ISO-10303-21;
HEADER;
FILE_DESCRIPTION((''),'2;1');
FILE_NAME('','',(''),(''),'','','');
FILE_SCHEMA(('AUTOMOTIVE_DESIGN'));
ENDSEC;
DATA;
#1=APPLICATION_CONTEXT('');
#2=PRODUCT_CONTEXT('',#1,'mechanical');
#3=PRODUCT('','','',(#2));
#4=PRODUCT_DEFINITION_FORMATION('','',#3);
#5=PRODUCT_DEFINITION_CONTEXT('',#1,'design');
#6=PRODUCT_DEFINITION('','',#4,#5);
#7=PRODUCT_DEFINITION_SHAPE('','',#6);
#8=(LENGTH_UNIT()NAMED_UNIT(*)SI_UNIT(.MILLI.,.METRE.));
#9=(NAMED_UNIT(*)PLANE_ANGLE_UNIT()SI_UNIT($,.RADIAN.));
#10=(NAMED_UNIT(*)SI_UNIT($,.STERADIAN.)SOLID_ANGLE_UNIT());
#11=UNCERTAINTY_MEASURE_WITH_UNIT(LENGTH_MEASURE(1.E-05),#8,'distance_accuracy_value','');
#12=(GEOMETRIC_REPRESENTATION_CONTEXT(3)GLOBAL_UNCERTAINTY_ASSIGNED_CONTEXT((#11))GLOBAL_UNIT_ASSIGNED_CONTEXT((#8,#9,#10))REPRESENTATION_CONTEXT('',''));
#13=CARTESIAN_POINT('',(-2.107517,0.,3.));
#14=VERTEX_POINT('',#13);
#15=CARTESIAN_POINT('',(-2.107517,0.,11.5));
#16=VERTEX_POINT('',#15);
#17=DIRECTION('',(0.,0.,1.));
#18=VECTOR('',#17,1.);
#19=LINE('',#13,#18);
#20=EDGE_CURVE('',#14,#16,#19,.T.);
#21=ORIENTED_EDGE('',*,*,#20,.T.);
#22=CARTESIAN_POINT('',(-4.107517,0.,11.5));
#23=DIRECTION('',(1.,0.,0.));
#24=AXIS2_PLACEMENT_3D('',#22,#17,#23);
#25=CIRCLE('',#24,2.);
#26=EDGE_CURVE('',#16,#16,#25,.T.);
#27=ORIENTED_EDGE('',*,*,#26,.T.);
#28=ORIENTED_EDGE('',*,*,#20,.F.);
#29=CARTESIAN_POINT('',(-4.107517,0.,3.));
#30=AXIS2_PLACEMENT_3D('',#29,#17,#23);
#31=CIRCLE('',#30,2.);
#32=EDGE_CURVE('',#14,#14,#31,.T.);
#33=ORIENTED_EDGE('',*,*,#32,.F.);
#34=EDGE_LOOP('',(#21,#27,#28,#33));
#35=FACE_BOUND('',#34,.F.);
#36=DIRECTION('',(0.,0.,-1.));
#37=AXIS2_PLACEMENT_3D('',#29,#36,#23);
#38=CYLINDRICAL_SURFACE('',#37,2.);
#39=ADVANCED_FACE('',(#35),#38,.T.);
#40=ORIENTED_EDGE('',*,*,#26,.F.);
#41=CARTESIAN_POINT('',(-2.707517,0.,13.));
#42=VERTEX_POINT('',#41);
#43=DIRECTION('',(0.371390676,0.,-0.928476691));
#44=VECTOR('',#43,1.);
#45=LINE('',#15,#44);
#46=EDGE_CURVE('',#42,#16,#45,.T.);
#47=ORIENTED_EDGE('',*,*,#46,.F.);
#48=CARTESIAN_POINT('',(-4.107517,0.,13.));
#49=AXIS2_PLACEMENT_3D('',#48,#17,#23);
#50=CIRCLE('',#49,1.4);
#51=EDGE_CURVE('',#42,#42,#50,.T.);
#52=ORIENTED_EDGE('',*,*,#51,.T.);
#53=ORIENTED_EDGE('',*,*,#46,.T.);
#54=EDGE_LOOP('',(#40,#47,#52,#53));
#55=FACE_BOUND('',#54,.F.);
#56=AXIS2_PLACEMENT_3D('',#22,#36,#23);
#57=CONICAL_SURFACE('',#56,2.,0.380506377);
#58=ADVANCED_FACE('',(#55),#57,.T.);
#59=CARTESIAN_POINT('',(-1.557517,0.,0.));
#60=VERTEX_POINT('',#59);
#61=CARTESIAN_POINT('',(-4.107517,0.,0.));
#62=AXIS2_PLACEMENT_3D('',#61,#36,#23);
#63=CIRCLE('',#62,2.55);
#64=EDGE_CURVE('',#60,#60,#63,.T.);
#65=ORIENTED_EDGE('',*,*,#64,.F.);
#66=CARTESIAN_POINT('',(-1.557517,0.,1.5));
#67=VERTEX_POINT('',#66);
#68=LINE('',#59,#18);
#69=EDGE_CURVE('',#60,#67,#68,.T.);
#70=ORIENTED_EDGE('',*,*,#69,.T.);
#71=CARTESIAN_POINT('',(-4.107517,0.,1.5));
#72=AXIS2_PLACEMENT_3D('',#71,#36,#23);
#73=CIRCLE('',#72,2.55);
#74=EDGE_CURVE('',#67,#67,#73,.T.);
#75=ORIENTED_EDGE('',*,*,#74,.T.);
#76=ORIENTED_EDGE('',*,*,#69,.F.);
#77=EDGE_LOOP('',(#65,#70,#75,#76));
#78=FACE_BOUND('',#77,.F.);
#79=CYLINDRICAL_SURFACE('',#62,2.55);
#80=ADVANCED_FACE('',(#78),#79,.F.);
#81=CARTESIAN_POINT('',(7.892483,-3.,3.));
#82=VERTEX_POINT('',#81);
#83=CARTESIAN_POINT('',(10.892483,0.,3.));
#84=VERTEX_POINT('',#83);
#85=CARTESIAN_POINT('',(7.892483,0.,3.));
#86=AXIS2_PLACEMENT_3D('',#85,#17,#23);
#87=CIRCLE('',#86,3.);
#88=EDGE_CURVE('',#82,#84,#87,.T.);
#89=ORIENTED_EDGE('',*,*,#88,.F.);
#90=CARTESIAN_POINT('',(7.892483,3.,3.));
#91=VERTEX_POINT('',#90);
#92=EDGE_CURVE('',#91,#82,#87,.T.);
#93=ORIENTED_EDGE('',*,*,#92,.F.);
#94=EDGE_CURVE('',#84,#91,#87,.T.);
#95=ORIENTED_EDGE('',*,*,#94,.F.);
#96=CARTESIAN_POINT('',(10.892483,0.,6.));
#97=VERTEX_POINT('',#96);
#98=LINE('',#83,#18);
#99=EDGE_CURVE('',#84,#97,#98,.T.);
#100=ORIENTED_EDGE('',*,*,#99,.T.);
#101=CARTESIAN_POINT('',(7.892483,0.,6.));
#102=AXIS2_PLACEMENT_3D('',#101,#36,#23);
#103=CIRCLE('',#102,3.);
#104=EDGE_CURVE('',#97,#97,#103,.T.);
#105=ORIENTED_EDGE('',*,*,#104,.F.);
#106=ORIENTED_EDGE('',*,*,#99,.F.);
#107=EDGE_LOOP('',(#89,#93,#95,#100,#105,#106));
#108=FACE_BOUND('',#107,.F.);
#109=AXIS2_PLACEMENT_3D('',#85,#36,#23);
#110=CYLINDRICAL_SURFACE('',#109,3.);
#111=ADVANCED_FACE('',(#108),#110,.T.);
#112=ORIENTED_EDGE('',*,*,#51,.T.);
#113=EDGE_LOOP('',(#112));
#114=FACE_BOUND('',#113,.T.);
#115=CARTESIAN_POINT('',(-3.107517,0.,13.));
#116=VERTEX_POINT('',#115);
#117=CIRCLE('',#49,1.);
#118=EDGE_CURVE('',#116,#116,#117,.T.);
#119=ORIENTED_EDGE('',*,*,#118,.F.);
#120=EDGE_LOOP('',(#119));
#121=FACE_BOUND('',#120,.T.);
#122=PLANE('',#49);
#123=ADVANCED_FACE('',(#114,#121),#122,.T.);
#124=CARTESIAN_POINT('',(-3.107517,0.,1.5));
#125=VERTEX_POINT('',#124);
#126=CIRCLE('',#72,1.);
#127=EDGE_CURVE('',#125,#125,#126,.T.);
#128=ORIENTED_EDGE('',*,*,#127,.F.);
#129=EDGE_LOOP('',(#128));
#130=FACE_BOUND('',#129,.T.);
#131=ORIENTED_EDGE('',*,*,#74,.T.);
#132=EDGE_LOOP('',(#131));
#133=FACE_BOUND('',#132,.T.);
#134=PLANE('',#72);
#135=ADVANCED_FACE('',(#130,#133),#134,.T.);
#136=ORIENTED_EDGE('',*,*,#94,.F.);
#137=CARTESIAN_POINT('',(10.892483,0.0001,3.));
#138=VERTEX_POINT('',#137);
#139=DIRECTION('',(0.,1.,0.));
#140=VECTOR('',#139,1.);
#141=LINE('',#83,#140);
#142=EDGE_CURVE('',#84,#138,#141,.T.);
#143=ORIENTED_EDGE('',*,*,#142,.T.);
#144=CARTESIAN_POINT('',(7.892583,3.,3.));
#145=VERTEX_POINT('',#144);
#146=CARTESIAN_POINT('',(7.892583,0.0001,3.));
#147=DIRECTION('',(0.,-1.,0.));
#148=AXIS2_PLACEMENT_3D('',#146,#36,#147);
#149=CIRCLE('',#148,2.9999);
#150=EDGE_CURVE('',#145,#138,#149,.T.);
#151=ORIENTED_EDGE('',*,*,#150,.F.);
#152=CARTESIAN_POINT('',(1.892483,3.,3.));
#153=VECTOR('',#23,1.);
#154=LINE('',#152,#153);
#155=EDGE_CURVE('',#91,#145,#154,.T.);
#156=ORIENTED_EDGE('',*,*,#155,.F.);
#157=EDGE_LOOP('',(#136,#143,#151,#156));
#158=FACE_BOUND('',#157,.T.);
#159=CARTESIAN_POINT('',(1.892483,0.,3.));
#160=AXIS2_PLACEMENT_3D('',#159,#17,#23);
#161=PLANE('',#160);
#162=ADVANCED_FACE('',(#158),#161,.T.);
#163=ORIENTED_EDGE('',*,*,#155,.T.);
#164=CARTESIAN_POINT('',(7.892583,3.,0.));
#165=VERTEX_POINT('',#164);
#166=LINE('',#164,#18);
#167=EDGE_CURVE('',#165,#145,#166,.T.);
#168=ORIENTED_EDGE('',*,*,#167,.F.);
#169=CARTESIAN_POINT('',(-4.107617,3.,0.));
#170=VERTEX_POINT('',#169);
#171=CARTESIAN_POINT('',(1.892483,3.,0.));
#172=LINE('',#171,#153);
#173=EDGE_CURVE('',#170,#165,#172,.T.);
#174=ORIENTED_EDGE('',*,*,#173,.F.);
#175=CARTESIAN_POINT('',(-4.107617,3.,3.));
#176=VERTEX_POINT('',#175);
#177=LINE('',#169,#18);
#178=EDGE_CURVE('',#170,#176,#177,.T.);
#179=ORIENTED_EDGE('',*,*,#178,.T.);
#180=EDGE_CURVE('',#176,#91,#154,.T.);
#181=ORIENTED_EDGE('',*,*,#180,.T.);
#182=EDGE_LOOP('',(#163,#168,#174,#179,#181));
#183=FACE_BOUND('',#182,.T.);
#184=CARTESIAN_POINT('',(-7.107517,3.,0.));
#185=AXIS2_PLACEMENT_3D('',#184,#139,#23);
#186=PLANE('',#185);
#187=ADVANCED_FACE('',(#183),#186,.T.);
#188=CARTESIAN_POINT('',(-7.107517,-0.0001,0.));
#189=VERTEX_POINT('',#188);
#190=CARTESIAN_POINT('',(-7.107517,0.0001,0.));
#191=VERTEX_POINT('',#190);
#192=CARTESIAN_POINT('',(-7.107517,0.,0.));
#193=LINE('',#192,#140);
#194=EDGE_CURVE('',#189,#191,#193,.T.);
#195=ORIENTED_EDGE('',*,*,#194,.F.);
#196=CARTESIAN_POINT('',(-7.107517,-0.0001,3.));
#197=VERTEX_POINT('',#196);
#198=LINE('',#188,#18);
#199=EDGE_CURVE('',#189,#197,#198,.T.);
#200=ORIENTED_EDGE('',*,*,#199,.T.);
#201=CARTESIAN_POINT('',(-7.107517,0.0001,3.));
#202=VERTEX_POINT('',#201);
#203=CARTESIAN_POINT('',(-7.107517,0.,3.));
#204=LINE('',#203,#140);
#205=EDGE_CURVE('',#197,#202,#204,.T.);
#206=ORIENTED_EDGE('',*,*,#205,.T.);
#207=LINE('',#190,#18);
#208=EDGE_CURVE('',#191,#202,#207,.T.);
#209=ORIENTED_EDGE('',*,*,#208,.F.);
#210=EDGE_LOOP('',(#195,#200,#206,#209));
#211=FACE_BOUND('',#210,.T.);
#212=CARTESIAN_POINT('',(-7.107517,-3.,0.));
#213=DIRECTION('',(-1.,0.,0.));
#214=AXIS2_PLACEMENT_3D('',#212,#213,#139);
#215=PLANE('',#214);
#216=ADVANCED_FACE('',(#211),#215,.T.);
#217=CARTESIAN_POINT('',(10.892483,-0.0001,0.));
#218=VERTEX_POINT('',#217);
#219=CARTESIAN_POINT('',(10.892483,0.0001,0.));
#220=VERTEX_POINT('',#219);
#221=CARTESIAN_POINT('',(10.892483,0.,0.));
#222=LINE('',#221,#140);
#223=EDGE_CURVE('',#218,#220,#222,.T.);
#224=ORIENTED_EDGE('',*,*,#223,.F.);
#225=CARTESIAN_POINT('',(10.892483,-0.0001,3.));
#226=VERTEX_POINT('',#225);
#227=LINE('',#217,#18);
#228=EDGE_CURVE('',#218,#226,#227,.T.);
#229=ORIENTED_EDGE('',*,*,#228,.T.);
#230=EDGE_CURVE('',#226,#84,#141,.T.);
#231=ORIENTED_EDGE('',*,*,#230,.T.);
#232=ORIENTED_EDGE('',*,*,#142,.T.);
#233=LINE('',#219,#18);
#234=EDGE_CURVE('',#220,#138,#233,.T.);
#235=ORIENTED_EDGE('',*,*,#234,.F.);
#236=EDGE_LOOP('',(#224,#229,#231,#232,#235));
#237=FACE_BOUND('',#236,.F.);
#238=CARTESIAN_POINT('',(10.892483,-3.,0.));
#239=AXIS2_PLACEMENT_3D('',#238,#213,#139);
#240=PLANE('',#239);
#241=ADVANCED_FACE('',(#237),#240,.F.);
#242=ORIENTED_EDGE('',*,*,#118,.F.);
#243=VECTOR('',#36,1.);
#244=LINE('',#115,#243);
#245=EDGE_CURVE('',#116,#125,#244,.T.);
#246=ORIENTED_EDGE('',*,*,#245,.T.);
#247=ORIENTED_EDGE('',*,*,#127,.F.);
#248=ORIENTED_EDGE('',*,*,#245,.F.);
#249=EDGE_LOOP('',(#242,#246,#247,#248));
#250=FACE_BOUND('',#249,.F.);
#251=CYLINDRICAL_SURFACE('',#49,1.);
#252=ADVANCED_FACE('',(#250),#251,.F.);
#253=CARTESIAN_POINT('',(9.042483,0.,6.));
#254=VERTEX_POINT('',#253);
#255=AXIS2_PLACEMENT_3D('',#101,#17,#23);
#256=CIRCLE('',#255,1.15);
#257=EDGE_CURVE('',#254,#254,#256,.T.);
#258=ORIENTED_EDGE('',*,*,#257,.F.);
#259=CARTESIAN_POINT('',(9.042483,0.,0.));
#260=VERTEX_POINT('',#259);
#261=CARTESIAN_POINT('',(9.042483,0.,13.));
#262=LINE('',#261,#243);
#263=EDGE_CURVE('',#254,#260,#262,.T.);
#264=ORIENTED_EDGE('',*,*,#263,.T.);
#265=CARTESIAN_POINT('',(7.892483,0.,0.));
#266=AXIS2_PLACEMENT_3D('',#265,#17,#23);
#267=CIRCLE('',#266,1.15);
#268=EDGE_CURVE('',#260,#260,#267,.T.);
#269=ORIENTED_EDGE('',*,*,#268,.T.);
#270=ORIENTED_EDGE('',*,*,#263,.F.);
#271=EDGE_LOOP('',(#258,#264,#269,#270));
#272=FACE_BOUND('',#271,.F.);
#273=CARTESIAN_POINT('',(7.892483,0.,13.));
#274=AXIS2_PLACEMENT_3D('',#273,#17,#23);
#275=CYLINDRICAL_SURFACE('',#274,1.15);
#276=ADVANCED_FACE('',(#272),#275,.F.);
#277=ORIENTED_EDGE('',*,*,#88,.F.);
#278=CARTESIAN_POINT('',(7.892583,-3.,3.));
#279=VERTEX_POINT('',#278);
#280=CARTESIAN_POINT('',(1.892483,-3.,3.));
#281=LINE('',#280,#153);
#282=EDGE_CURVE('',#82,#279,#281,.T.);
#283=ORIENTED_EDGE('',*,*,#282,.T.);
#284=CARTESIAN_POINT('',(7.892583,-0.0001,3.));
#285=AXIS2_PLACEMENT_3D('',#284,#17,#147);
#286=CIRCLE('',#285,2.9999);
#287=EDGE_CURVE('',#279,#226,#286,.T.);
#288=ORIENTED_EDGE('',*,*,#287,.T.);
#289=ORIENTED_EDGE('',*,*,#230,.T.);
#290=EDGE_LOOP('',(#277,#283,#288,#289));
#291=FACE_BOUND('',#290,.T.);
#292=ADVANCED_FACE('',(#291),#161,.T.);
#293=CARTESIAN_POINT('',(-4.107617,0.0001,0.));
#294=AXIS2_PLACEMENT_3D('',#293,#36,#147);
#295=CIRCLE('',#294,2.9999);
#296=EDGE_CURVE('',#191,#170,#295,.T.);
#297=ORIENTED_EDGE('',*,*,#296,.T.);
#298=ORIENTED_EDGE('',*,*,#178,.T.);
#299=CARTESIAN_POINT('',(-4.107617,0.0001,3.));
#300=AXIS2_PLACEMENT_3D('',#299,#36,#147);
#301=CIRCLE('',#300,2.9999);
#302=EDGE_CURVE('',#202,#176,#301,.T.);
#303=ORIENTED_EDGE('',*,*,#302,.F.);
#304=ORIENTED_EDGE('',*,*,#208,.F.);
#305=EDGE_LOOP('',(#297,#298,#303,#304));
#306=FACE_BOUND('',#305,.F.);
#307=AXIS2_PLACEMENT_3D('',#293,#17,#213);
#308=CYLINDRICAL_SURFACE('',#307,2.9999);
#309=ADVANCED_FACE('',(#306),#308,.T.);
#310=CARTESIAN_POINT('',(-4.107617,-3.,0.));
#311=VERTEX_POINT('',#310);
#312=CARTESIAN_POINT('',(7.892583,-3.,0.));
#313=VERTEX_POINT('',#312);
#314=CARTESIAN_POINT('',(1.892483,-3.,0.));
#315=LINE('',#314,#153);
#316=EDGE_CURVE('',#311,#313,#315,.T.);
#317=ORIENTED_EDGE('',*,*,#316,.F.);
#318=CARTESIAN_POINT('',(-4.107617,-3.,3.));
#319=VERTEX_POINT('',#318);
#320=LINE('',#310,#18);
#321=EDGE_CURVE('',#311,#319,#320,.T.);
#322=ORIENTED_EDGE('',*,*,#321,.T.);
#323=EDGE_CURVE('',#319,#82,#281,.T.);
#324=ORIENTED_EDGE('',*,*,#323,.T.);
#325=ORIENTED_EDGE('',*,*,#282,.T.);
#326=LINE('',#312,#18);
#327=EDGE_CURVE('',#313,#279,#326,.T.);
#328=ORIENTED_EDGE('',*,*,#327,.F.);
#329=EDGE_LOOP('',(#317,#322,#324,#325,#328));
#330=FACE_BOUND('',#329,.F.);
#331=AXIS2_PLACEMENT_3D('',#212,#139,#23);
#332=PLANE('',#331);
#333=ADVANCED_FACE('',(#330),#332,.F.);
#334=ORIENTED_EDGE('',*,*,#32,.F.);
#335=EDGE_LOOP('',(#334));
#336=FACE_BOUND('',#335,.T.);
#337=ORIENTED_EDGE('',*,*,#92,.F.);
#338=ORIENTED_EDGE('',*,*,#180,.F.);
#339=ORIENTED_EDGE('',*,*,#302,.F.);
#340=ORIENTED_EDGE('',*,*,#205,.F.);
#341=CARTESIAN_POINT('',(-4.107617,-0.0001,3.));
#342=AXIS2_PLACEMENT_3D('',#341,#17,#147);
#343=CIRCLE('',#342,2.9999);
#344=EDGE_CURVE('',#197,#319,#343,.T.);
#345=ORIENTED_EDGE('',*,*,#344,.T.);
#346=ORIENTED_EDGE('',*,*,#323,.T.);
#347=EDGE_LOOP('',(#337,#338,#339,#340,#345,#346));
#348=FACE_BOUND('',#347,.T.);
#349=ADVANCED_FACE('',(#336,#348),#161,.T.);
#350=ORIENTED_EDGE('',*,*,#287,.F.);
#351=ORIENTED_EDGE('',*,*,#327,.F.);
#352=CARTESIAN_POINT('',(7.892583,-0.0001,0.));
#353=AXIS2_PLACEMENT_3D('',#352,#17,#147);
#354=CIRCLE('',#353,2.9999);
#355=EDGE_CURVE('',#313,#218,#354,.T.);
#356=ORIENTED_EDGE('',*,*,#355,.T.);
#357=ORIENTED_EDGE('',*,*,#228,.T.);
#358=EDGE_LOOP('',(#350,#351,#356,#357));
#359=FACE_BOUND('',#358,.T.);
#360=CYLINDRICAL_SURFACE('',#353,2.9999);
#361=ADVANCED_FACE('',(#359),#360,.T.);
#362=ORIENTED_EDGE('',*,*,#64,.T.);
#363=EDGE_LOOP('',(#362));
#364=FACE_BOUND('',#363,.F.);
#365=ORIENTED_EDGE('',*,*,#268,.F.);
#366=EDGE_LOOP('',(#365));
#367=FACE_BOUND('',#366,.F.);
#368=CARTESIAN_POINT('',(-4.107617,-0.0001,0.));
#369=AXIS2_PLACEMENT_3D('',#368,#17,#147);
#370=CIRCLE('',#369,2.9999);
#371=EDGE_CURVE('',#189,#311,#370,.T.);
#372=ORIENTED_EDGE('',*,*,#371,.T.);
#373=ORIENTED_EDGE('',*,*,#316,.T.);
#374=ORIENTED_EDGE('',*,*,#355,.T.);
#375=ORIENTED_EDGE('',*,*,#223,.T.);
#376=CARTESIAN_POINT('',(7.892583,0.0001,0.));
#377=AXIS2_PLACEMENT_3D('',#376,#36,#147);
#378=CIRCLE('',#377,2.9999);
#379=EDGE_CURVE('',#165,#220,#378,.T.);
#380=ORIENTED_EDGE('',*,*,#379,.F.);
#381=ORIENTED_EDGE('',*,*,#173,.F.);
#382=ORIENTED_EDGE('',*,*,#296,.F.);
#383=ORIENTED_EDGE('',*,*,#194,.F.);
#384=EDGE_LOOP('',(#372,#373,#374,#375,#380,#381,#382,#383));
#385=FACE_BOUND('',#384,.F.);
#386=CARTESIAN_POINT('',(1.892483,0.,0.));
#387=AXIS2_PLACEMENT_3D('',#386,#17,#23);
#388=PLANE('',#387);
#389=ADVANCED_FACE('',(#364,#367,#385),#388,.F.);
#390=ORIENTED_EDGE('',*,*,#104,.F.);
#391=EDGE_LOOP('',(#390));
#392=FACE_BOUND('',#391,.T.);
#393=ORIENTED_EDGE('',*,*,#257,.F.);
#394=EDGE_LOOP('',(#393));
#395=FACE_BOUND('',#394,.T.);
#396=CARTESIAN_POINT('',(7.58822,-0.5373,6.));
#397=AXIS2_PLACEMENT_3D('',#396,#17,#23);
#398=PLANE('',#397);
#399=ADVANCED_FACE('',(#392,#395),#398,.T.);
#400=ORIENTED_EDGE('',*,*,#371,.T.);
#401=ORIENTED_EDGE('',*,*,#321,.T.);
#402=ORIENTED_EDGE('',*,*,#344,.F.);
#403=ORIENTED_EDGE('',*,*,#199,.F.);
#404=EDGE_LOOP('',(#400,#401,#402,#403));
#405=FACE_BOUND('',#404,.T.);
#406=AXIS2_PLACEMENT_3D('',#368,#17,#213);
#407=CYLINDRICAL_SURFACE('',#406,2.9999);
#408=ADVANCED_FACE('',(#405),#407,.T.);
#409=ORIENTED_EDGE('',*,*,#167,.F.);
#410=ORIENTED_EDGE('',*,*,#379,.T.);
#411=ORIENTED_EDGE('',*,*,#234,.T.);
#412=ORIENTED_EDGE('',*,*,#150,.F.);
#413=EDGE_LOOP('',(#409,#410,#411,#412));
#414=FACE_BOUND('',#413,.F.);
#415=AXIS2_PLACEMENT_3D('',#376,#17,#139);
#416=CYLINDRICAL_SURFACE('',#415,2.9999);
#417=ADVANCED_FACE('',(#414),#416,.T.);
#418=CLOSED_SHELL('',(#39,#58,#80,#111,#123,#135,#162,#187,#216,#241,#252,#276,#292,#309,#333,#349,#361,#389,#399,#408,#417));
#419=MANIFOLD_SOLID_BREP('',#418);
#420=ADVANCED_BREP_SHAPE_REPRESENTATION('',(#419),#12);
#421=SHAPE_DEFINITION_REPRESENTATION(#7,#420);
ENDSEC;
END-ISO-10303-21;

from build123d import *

# Parameters (mm, degrees)
F0_W      = 18
F0_H      = 6
F1_DEPTH  = 3
F2_R      = 3
F2_R_2    = 2
F3_DEPTH  = 10
F4_R      = 1
F4_R_2    = 1.15
F5_DEPTH  = 20
F6_SIZE2  = 1.5
F6_SIZE   = 0.6
F7_W      = 11.6012076614
F7_H      = 11.8295210414
F8_DEPTH  = 7
F9_R      = 2.9999
F10_R     = 2.55
F10_R_2   = 1
F11_DEPTH = 1.5


# Not quite as in the source:
# - a fillet or chamfer is up to 0.001 mm smaller than in the source, because OpenCascade refuses the exact size


with BuildPart() as f1:
    # F0 (on Top) → F1 (new body)
    with BuildSketch(Plane.XY):
        with Locations((1.8924829921, 0)):
            Rectangle(F0_W, F0_H)
    extrude(amount=F1_DEPTH)

    # F2 (on face) → F3 (join)
    with BuildSketch(Plane.XY.offset(3)):
        with Locations((7.8924829921, 0)):
            Circle(F2_R)
        with Locations((-4.1075170079, 0)):
            Circle(F2_R_2)
    extrude(amount=F3_DEPTH)

    # F4 (on face) → F5 (cut)
    with BuildSketch(Plane.XY.offset(13)):
        with Locations((-4.1075170079, 0)):
            Circle(F4_R)
        with Locations((7.8924829921, 0)):
            Circle(F4_R_2)
    extrude(amount=-F5_DEPTH, mode=Mode.SUBTRACT)

    # F6
    f6_edges = [f1.edges().sort_by_distance(p)[0] for p in [
        (-6.107517, 0, 13),
    ]]
    f6_side = f1.faces().sort_by_distance((-6.050948, 0, 13))[0]
    chamfer(f6_edges, length=F6_SIZE, length2=F6_SIZE2, reference=f6_side)

    # F7 (on face) → F8 (cut)
    with BuildSketch(Plane.XY.offset(13)):
        with Locations((7.5882198871, -0.5373002496)):
            Rectangle(F7_W, F7_H)
    extrude(amount=-F8_DEPTH, mode=Mode.SUBTRACT)

    # F9 (radius 3 in the source; OpenCascade refuses exactly that, so slightly less here)
    f9_edges = [f1.edges().sort_by_distance(p)[0] for p in [
        (10.892483, -3, 1.5),
        (10.892483, 3, 1.5),
        (-7.107517, 3, 1.5),
        (-7.107517, -3, 1.5),
    ]]
    fillet(f9_edges, radius=F9_R)

    # F10 (on face) → F11 (cut)
    with BuildSketch(Plane(origin=(0, 0, 0), x_dir=(1, 0, 0), z_dir=(0, 0, -1))):
        with Locations((-4.1075170079, 0)):
            Circle(F10_R)
        with Locations((-4.1075170079, 0)):
            Circle(F10_R_2, mode=Mode.SUBTRACT)
    extrude(amount=-F11_DEPTH, mode=Mode.SUBTRACT)


solid = f1.part
